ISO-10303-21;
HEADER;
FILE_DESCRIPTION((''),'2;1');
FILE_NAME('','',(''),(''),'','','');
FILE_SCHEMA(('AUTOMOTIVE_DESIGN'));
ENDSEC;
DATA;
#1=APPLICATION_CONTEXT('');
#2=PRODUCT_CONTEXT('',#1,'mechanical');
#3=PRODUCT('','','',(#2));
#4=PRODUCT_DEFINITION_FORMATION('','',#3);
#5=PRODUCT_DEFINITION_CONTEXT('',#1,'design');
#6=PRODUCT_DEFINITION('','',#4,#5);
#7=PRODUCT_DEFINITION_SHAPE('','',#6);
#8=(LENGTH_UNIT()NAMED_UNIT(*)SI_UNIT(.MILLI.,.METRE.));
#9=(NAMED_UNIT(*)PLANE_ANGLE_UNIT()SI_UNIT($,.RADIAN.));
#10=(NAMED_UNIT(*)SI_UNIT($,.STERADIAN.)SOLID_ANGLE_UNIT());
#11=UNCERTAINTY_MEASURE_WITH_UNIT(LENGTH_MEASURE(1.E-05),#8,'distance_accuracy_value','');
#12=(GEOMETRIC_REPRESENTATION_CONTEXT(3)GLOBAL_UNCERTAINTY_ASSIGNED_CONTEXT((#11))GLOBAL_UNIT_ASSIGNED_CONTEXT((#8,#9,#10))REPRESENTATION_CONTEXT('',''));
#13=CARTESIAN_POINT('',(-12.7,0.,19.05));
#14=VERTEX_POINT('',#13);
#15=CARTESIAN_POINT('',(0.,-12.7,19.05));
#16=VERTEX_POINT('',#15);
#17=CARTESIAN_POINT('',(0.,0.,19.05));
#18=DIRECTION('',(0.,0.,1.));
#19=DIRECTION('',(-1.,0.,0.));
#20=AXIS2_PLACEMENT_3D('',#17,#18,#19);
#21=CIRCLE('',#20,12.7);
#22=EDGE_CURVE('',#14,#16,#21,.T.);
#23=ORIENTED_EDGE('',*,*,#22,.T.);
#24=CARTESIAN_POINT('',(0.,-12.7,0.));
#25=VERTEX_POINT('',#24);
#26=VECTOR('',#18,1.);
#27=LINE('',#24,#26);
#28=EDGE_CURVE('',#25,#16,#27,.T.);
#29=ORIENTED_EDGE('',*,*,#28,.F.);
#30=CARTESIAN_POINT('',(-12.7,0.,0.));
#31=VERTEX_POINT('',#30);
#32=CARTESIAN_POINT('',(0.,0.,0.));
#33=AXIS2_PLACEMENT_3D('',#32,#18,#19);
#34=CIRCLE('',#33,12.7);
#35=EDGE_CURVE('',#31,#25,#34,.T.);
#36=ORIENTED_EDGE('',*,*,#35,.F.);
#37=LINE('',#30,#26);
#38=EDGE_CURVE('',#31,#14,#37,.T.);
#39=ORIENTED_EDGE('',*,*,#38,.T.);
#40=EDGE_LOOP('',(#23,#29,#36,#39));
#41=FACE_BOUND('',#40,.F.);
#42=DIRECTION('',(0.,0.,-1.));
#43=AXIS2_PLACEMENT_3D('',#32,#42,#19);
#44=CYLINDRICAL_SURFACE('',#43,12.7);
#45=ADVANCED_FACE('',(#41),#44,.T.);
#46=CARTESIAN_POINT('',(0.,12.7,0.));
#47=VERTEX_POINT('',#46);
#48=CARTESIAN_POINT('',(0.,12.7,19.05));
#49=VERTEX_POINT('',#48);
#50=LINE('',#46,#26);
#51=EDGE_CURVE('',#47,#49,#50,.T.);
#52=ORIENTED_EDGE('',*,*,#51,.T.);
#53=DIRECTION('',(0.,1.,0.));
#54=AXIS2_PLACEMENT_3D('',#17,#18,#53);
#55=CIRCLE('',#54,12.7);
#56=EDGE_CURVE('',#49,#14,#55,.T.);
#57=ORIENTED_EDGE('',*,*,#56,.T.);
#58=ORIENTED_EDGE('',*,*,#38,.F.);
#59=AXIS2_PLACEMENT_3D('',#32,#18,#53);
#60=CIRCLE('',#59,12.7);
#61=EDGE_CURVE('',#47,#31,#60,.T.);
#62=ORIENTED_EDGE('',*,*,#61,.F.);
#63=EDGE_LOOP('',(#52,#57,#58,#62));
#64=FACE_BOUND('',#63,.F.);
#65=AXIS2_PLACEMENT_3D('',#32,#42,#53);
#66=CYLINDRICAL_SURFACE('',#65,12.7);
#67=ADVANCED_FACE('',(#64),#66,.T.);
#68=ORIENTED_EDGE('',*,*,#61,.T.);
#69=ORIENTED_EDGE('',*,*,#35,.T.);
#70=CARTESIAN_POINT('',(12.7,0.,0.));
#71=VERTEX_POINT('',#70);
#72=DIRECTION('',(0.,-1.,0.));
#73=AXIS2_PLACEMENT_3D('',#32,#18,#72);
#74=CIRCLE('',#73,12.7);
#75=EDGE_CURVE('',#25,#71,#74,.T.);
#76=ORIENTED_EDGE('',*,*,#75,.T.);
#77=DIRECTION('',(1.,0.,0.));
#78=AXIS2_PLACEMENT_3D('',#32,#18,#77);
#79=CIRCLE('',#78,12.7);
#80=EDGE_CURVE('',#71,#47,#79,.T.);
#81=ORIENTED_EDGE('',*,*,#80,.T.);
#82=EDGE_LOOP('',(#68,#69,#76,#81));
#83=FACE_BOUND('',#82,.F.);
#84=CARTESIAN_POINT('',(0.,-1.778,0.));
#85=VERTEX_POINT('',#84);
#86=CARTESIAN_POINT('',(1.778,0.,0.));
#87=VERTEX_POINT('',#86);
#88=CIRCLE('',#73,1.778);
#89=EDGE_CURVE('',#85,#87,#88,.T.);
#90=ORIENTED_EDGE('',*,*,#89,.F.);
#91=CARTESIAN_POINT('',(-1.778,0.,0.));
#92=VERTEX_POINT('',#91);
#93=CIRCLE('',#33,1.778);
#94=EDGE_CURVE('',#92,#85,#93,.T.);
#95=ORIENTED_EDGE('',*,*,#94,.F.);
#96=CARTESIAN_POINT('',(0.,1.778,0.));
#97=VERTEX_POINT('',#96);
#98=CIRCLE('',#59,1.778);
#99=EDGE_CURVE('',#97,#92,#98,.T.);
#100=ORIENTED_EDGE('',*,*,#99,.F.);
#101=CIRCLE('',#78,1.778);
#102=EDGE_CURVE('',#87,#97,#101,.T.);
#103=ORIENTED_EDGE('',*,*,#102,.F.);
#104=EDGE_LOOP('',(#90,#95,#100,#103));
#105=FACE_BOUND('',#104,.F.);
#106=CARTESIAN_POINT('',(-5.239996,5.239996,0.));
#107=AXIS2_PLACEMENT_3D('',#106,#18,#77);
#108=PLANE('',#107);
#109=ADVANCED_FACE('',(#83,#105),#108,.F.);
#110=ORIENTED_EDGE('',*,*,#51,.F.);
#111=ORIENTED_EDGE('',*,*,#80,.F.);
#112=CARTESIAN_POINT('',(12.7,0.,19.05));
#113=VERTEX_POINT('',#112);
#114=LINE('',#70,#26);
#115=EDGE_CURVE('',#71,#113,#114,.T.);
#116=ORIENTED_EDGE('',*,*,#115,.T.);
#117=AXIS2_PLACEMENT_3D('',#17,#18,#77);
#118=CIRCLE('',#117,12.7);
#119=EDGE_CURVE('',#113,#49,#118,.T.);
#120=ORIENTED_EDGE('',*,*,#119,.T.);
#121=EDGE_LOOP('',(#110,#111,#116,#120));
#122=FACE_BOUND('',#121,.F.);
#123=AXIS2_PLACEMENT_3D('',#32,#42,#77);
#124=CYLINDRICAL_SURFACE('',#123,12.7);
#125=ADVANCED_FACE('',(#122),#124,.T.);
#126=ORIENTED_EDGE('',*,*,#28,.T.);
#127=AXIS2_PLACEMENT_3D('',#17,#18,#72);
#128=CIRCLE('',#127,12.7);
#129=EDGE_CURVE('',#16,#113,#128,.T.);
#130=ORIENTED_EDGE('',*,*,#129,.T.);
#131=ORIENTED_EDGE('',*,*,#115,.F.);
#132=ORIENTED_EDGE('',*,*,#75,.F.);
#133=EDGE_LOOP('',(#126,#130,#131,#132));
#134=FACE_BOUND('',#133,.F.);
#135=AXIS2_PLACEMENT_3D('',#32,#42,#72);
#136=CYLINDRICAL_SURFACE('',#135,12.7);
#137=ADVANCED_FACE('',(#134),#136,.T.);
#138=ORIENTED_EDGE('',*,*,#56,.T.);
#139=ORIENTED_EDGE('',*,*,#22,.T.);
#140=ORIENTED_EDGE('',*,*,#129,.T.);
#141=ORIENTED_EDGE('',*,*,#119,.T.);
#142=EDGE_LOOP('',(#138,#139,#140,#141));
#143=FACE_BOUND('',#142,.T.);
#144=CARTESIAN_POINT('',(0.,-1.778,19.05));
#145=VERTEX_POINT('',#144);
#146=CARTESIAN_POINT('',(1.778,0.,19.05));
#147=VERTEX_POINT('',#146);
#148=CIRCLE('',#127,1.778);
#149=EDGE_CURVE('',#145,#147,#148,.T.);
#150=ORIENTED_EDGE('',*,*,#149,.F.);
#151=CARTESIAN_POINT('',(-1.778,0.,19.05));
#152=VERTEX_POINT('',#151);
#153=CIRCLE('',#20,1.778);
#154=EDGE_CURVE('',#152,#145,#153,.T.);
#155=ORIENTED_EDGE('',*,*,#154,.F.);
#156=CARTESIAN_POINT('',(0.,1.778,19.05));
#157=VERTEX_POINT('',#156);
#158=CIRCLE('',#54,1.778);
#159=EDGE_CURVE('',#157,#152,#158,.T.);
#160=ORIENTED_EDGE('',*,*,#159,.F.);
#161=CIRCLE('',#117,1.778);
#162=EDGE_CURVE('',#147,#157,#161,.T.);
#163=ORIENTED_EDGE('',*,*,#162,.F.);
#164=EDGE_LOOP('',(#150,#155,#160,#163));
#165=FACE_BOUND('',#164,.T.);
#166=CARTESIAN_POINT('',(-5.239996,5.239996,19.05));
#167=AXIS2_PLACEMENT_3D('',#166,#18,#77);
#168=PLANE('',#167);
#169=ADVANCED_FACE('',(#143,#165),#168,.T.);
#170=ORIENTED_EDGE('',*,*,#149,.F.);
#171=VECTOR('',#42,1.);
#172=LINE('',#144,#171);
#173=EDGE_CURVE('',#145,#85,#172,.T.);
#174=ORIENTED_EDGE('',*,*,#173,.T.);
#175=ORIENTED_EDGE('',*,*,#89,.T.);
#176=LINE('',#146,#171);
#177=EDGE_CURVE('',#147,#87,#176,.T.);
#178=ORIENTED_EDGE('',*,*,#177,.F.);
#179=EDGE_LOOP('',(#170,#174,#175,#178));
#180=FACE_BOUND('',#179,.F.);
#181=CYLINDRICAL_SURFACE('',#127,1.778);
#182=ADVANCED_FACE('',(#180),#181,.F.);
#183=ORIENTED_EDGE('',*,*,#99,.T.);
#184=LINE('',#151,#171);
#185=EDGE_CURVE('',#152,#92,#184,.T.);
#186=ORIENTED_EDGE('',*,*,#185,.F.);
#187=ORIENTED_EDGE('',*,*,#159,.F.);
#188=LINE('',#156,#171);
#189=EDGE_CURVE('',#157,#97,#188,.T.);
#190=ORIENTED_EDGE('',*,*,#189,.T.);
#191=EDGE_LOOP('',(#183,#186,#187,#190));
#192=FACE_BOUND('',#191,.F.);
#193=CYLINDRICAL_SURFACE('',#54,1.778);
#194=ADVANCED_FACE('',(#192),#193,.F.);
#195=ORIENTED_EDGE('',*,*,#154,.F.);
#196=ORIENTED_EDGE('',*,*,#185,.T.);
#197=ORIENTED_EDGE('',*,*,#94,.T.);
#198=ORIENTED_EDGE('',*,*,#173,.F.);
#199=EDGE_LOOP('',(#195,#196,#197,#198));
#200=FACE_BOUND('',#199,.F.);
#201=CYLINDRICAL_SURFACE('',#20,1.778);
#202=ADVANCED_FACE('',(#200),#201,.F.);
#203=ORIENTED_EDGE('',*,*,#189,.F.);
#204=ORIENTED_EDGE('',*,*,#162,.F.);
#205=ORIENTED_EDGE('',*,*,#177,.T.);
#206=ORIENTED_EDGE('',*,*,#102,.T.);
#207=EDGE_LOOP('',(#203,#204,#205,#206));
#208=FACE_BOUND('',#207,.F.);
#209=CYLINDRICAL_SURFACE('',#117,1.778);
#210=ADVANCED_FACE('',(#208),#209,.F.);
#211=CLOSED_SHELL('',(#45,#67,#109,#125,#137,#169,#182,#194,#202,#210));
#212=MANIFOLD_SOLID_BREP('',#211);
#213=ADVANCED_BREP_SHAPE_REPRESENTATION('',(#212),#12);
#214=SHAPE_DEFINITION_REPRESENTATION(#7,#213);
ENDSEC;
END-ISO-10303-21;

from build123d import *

# Parameters (mm, degrees)
F1_DEPTH = 19.05
F3_DEPTH = 134.874


with BuildPart() as f1:
    # F0 (on Top) → F1 (new body)
    with BuildSketch(Plane.XY):
        with BuildLine():
            Line((-12.7, 0), (0, 0))
            Line((0, 0), (0, 12.7))
            ThreePointArc((0, 12.7), (-8.9802561211, 8.9802561211), (-12.7, 0))
        make_face()
        with BuildLine():
            Line((0, 12.7), (0, 0))
            Line((0, 0), (12.7, 0))
            ThreePointArc((12.7, 0), (8.9802561211, 8.9802561211), (0, 12.7))
        make_face()
        with BuildLine():
            Line((12.7, 0), (0, 0))
            Line((0, 0), (0, -12.7))
            ThreePointArc((0, -12.7), (8.9802561211, -8.9802561211), (12.7, 0))
        make_face()
        with BuildLine():
            Line((0, -12.7), (0, 0))
            Line((0, 0), (-12.7, 0))
            ThreePointArc((-12.7, 0), (-8.9802561211, -8.9802561211), (0, -12.7))
        make_face()
    extrude(amount=F1_DEPTH)

    # F2 (on face) → F3 (cut)
    with BuildSketch(Plane.XY.offset(19.05)):
        with BuildLine():
            Line((-1.778, 0), (0, 0))
            Line((0, 0), (0, 1.778))
            ThreePointArc((0, 1.778), (-1.2572358569, 1.2572358569), (-1.778, 0))
        make_face()
        with BuildLine():
            Line((0, 1.778), (0, 0))
            Line((0, 0), (1.778, 0))
            ThreePointArc((1.778, 0), (1.2572358569, 1.2572358569), (0, 1.778))
        make_face()
        with BuildLine():
            Line((1.778, 0), (0, 0))
            Line((0, 0), (0, -1.778))
            ThreePointArc((0, -1.778), (1.2572358569, -1.2572358569), (1.778, 0))
        make_face()
        with BuildLine():
            Line((0, -1.778), (0, 0))
            Line((0, 0), (-1.778, 0))
            ThreePointArc((-1.778, 0), (-1.2572358569, -1.2572358569), (0, -1.778))
        make_face()
    extrude(amount=-F3_DEPTH, mode=Mode.SUBTRACT)


solid = f1.part
